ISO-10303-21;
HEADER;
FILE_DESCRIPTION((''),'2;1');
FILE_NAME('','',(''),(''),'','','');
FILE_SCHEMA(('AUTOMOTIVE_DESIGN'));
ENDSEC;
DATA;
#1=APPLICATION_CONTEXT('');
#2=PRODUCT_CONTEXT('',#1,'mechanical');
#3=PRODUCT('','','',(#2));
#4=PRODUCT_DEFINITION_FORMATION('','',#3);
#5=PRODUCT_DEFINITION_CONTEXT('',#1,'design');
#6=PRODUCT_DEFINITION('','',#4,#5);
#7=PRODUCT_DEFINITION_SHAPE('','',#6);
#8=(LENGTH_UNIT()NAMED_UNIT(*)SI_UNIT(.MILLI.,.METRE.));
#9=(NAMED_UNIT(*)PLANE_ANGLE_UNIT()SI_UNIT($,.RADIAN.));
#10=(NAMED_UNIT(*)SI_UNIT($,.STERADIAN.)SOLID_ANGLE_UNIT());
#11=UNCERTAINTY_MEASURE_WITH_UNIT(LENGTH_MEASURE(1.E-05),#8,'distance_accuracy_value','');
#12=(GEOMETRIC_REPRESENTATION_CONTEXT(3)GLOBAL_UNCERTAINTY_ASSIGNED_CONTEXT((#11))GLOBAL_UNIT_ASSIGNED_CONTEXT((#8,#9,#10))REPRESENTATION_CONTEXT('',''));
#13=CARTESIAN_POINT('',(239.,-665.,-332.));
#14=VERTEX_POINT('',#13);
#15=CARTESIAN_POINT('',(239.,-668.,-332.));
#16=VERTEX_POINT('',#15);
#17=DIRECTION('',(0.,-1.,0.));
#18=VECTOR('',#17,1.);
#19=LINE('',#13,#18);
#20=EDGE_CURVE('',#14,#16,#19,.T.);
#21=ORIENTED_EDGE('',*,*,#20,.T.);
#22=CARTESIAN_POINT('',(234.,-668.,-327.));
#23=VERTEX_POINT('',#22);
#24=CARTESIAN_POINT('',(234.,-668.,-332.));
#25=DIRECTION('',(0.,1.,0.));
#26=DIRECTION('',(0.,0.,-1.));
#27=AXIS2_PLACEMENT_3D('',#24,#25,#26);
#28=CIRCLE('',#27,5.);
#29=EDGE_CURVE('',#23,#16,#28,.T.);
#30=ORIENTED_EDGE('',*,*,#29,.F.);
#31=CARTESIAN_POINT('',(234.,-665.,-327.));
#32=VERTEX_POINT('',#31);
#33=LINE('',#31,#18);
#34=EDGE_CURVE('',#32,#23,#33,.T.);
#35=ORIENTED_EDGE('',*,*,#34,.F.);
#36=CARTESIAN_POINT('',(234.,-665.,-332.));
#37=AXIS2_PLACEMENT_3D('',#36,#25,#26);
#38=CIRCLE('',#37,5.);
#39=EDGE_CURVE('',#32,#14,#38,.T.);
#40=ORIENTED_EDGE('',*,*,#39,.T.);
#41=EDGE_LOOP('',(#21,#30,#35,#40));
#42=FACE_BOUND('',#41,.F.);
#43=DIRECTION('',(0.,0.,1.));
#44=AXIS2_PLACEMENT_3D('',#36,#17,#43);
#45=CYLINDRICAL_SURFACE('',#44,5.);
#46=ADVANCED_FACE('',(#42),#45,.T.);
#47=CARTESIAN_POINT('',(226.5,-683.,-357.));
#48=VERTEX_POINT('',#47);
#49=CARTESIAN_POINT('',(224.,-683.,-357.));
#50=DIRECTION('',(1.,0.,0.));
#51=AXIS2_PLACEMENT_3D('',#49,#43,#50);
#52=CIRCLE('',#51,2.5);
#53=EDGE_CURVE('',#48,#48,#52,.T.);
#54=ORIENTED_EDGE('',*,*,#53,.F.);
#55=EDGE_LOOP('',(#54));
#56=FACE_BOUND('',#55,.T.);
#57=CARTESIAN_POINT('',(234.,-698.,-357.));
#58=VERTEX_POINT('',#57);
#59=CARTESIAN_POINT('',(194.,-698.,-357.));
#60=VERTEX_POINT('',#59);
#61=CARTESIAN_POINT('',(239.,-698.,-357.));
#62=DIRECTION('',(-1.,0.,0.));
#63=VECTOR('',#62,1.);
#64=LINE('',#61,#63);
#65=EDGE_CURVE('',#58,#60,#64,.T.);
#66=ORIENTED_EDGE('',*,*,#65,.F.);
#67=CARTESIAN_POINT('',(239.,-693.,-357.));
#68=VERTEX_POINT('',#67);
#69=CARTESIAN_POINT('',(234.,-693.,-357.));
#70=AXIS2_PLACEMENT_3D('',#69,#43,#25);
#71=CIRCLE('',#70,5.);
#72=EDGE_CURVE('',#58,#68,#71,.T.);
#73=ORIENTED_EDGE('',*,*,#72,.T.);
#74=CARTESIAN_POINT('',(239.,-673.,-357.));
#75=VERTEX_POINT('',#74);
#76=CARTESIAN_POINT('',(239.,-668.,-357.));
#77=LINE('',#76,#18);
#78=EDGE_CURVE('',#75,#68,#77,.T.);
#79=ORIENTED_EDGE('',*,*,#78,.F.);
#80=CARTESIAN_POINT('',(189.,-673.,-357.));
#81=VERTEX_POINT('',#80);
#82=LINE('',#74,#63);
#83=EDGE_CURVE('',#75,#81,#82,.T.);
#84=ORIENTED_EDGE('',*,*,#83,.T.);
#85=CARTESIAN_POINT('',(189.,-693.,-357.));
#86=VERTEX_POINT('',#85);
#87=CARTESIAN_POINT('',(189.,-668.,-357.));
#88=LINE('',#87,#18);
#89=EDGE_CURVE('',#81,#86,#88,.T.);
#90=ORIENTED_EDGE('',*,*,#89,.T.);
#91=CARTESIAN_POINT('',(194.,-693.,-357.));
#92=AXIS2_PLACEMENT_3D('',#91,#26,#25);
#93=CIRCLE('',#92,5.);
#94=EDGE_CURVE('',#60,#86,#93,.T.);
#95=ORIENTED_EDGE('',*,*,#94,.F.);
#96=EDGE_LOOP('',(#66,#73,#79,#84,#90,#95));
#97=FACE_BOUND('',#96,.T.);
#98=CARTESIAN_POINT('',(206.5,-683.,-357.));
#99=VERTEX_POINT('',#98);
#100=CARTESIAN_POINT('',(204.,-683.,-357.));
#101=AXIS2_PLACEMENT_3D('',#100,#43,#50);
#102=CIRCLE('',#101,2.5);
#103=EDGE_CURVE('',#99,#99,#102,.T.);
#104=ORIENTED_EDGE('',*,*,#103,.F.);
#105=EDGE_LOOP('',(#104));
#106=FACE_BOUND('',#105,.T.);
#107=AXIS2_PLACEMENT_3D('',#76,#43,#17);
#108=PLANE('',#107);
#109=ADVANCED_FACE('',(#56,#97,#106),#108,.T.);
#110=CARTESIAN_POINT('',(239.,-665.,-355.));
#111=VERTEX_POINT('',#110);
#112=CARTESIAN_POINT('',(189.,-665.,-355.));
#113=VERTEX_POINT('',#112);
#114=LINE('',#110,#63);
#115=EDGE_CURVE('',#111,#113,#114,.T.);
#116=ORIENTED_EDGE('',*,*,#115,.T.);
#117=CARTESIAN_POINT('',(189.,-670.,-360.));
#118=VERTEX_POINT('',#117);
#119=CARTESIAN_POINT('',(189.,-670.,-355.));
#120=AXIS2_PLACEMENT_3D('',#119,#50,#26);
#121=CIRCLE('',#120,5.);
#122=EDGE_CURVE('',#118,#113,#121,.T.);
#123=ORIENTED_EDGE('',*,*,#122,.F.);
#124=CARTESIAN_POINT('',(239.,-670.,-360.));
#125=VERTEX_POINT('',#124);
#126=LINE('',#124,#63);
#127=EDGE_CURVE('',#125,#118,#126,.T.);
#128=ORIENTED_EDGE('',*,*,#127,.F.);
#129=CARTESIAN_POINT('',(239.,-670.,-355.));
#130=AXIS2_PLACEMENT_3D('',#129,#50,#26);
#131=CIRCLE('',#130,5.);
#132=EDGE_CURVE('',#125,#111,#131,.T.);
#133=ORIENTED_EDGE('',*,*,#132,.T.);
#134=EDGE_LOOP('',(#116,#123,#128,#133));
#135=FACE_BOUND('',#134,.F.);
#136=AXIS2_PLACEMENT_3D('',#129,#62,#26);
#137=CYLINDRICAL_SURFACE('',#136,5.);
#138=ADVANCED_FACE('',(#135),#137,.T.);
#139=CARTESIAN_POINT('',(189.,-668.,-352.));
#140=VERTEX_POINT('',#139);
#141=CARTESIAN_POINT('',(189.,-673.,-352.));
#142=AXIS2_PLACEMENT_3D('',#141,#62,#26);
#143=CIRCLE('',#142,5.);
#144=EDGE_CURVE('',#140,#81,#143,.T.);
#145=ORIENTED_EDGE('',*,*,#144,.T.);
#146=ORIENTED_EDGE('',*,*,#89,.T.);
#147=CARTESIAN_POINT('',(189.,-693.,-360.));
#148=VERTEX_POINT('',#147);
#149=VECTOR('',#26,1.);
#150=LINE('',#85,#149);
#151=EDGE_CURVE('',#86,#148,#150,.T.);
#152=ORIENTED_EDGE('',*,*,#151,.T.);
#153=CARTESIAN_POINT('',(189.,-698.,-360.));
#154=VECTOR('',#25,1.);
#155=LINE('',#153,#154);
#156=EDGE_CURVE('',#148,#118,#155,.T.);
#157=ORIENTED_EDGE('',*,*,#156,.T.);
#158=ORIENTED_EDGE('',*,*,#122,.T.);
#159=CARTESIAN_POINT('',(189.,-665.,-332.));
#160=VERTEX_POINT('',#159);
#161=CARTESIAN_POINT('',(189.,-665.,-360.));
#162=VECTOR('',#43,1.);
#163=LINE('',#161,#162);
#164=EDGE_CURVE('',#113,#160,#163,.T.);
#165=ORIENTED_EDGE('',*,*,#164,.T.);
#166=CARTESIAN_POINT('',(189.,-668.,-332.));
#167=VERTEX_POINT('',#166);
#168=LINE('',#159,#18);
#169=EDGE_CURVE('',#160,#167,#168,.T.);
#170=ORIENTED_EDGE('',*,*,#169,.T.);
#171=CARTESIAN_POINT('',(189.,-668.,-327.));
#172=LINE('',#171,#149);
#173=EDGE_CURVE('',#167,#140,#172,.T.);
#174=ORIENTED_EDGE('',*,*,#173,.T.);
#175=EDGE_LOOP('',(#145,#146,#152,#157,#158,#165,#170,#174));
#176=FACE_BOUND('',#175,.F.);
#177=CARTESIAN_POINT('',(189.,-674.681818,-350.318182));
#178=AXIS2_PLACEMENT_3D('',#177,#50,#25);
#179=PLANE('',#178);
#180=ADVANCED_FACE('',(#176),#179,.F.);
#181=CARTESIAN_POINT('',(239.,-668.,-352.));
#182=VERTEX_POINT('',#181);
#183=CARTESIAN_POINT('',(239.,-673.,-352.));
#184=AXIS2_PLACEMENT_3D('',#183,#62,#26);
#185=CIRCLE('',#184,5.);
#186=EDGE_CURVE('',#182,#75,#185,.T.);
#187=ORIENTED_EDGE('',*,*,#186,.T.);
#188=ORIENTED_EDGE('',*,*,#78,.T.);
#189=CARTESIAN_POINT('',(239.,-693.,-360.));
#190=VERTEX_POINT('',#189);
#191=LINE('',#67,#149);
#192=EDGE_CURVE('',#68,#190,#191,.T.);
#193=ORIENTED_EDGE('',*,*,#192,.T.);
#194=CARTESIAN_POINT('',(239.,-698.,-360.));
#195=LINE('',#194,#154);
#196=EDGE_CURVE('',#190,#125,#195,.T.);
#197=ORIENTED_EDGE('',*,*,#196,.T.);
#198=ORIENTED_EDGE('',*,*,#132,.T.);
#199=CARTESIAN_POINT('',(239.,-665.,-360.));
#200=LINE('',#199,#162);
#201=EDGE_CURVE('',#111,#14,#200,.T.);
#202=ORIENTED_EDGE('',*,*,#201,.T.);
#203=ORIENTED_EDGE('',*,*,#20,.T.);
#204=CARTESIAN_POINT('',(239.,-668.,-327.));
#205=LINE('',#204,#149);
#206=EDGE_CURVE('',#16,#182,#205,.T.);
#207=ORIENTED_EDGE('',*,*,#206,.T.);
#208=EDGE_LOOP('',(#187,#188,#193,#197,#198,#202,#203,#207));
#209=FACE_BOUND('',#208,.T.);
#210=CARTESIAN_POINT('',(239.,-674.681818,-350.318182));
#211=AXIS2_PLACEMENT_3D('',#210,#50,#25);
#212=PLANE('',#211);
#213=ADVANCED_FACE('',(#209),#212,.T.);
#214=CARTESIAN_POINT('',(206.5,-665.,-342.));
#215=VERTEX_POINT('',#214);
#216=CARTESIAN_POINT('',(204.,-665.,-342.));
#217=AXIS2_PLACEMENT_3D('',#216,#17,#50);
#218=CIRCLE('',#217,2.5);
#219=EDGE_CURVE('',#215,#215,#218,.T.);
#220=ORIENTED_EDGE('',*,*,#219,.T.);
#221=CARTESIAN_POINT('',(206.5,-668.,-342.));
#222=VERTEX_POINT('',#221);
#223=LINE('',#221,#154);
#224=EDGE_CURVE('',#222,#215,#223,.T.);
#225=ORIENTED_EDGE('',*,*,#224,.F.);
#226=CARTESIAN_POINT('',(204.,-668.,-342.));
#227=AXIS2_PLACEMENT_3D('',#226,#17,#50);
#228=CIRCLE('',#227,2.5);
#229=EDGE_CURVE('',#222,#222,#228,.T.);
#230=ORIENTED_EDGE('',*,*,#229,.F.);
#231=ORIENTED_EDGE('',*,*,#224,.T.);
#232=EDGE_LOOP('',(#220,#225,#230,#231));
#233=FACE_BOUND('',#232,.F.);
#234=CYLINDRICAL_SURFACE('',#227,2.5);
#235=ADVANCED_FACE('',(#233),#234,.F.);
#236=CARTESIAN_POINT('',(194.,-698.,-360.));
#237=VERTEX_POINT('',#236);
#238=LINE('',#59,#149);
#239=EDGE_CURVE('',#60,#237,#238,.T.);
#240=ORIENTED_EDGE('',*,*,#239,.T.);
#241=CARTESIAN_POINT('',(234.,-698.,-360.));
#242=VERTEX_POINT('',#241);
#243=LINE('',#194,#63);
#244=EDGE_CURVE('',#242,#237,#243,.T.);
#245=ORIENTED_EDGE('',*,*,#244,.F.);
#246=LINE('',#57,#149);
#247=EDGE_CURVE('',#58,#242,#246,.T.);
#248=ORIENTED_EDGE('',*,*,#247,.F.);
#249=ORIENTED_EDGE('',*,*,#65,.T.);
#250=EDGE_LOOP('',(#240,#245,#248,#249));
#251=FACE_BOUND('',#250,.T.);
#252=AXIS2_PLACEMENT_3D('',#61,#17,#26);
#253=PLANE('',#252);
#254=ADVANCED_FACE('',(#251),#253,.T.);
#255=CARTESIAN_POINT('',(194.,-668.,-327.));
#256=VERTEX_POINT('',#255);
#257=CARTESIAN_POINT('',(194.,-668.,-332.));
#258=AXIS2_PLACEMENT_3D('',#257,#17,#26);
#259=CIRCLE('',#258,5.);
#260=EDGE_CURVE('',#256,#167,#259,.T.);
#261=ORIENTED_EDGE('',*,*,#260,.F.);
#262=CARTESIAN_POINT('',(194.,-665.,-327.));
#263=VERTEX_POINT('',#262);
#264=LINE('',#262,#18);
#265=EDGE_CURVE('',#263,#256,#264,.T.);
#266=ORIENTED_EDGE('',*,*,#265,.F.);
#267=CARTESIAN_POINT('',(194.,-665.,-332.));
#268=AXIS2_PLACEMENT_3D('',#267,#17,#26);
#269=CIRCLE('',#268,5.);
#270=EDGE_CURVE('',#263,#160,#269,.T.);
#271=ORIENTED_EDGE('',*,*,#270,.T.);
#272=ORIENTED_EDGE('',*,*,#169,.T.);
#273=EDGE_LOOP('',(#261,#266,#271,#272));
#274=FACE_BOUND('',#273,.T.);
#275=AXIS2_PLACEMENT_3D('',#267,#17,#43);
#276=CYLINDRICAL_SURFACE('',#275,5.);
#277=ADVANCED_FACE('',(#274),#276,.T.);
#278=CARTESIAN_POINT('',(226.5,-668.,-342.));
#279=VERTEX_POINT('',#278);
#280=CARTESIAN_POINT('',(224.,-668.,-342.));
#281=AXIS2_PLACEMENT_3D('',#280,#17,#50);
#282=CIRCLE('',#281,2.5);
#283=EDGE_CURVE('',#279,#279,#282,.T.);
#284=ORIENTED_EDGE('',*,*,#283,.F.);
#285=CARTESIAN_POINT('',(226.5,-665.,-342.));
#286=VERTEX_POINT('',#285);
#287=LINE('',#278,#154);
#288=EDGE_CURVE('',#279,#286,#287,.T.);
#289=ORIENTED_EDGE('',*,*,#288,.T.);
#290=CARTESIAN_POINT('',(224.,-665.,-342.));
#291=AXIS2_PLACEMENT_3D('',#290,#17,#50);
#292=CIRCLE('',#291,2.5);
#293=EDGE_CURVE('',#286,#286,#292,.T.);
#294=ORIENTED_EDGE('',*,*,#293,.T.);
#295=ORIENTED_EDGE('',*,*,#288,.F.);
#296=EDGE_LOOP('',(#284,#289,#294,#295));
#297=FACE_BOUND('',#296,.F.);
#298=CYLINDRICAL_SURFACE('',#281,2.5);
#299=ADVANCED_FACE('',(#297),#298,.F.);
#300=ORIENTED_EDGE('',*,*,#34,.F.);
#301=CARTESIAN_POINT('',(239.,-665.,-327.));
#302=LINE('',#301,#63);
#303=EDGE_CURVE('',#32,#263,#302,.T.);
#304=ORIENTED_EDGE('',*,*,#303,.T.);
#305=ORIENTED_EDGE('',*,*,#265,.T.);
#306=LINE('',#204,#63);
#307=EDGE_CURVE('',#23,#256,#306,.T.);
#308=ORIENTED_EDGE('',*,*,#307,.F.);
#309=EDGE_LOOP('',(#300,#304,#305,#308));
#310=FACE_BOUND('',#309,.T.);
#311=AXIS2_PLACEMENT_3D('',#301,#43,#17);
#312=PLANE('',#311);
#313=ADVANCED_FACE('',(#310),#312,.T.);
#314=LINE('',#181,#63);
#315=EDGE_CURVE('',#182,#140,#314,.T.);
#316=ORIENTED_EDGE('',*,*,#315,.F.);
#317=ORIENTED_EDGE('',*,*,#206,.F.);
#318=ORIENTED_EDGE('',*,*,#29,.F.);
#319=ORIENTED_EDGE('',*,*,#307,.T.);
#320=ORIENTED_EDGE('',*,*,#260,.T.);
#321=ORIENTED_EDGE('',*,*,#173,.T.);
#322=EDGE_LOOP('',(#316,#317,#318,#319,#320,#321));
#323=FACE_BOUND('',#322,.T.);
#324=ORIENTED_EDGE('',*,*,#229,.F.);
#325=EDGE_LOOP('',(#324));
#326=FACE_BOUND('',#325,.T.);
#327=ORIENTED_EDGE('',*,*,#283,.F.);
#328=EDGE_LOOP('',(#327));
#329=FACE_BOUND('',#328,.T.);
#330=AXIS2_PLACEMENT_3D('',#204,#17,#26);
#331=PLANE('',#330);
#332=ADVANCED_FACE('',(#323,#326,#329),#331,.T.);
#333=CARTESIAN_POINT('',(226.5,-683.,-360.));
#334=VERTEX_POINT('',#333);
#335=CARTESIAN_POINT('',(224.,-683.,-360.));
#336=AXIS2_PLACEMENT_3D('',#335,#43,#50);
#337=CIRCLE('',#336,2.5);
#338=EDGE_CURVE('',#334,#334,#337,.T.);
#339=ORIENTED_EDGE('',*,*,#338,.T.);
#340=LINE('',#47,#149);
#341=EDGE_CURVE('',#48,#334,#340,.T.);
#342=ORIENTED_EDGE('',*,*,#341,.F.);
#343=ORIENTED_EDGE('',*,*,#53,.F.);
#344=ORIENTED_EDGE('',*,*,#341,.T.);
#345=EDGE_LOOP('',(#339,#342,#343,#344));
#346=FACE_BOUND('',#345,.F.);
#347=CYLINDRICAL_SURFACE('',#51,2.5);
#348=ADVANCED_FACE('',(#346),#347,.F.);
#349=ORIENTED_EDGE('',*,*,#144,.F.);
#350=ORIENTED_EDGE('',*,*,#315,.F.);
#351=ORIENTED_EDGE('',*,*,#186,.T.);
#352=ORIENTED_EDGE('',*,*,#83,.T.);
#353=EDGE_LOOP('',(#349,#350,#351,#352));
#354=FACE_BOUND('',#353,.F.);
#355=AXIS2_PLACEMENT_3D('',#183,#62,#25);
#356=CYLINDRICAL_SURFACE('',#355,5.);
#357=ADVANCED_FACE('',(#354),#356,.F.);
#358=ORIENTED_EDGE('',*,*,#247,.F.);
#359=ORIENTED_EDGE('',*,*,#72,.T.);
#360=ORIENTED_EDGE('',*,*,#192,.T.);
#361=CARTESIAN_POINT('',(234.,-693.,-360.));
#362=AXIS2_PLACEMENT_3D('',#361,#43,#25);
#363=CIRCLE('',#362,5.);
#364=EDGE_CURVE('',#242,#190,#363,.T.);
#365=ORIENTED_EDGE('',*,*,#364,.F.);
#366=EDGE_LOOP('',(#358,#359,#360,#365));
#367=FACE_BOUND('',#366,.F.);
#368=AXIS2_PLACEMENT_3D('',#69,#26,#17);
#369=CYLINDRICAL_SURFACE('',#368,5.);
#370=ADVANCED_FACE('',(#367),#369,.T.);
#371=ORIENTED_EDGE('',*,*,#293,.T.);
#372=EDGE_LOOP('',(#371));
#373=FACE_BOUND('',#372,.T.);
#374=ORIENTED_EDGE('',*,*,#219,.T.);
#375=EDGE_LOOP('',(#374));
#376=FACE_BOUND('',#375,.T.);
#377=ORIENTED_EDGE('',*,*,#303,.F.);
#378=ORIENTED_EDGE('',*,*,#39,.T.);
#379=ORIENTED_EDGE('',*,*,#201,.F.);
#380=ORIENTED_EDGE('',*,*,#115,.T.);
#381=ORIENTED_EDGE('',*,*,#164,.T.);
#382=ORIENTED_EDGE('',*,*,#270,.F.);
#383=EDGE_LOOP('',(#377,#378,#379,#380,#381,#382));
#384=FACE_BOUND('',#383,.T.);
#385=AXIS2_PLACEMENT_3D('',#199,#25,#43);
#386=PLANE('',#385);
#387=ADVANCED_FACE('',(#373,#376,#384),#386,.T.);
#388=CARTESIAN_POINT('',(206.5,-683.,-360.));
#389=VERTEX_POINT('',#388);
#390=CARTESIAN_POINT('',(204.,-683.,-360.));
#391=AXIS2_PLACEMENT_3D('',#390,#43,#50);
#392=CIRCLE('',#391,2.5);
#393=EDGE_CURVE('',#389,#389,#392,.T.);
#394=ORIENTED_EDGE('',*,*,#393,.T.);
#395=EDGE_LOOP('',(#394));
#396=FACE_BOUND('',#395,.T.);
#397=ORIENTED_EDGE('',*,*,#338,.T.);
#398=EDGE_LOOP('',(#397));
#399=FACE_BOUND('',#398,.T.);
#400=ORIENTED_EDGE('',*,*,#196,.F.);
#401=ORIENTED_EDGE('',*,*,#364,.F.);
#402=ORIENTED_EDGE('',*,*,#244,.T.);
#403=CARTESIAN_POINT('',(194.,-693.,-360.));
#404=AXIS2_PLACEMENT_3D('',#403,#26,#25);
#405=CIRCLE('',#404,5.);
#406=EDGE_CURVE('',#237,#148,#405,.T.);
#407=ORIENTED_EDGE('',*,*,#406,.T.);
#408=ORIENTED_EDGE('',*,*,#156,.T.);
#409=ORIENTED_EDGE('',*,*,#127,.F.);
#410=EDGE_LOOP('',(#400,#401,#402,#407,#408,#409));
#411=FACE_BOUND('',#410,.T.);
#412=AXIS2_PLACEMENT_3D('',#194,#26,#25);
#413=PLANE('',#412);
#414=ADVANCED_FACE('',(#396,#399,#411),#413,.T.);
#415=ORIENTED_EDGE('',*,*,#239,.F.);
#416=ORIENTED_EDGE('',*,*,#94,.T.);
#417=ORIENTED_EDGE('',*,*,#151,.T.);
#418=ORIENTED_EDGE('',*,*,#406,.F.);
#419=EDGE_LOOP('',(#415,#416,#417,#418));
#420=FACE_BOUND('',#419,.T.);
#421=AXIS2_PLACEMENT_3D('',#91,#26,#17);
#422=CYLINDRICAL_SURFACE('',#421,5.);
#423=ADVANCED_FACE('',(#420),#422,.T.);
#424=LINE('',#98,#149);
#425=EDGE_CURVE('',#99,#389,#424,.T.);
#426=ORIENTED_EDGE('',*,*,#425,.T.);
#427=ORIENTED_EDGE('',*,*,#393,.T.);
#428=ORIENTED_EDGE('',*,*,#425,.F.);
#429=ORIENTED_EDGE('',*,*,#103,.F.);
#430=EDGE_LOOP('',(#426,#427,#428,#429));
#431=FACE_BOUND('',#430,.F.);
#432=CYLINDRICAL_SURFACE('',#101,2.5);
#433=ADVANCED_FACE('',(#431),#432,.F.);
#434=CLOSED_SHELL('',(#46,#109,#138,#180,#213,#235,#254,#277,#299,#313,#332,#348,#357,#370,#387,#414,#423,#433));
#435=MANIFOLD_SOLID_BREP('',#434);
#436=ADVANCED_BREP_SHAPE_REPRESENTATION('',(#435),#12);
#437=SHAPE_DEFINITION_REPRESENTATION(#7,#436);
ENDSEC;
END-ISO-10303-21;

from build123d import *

# Parameters (mm, degrees)
F0_W      = 145
F0_H      = 5
F1_DEPTH  = 360
F0_W_2    = 58
F0_H_2    = 655
F2_DEPTH  = 360
F0_W_3    = 155
F0_H_3    = 163
F0_H_4    = 153
F3_DEPTH  = 360
F5_DEPTH  = 665
F7_DEPTH  = 394
F9_DEPTH  = 125
F11_DEPTH = 50
F12_R     = 5
F14_R     = 2.5
F15_DEPTH = 10
F13_R     = 2.5
F16_DEPTH = 10
F18_DEPTH = 502


# Not quite as in the source:
# - a feature names something its author has since deleted; it is built from what else it names


with BuildPart() as f1:
    # F0 (on Top) → F1 (new body)
    with BuildSketch(Plane.XY):
        Polygon((5, 0), (0, 0), (0, -665), (5, -665), (5, -660), (5, -5), align=None)
        Polygon((155, 0), (5, 0), (5, -5), (150, -5), (155, -5), align=None)
        Polygon((155, -665), (155, -5), (150, -5), (150, -660), (150, -665), align=None)
        with Locations((77.5, -662.5)):
            Rectangle(F0_W, F0_H)
    extrude(amount=-F1_DEPTH)


with BuildPart() as f2:
    # F0 (on Top) → F2 (new body)
    with BuildSketch(Plane.XY):
        Polygon((239, 0), (155, 0), (155, -5), (155, -665), (239, -665), (239, -163), align=None)
        with Locations((197, -332.5)):
            Rectangle(F0_W_2, F0_H_2, mode=Mode.SUBTRACT)
    extrude(amount=-F2_DEPTH)


with BuildPart() as f3:
    # F0 (on Top) → F3 (new body)
    with BuildSketch(Plane.XY):
        with Locations((316.5, -81.5)):
            Rectangle(F0_W_3, F0_H_3)
        with Locations((316.5, -81.5)):
            Rectangle(F0_W, F0_H_4, mode=Mode.SUBTRACT)
    extrude(amount=-F3_DEPTH)


with BuildPart() as f5:
    # F4 (on face) → F5 (new body)
    with BuildSketch(Plane(origin=(0, 0, 0), x_dir=(-1, 0, 0), z_dir=(0, 1, 0))):
        Polygon((0, -330), (0, -360), (30, -360), (30, -359), (1, -359), (1, -330), align=None)
    extrude(amount=-F5_DEPTH)


with BuildPart() as f7:
    # F6 (on face) → F7 (new body)
    with BuildSketch(Plane.YZ.offset(394)):
        Polygon((0, -330), (0, -360), (30, -360), (30, -359), (1, -359), (1, -330), align=None)
    extrude(amount=-F7_DEPTH)


with BuildPart() as f9:
    # F8 (on face) → F9 (new body)
    with BuildSketch(Plane.YZ.offset(394)):
        Polygon((-193, -360), (-163, -360), (-163, -330), (-164, -330), (-164, -359), (-193, -359), align=None)
    extrude(amount=-F9_DEPTH)


with BuildPart() as f11:
    # F10 (on face) → F11 (new body)
    with BuildSketch(Plane.YZ.offset(239)):
        Polygon((-698, -360), (-665, -360), (-665, -327), (-668, -327), (-668, -357), (-698, -357), align=None)
    extrude(amount=-F11_DEPTH)

    # F12
    f12_edges = [f11.edges().sort_by_distance(p)[0] for p in [
        (214, -668, -357),
        (189, -666.5, -327),
        (239, -666.5, -327),
        (239, -698, -358.5),
        (189, -698, -358.5),
        (214, -665, -360),
    ]]
    fillet(f12_edges, radius=F12_R)


with BuildPart() as f15_tool:
    # F14 (on face) → F15 (new body)
    with BuildSketch(Plane.XZ.offset(668)):
        with Locations((204, -342)):
            Circle(F14_R)
        with Locations((224, -342)):
            Circle(F14_R)
    extrude(amount=-F15_DEPTH)


with BuildPart() as f2_1:
    add(f2.part)

    # F15: cut by f15_tool
    add(f15_tool.part, mode=Mode.SUBTRACT)


with BuildPart() as f11_1:
    add(f11.part)

    # F15: cut by f15_tool
    add(f15_tool.part, mode=Mode.SUBTRACT)

    # F13 (on face) → F16 (cut)
    with BuildSketch(Plane.XY.offset(-357)):
        with Locations((204, -683)):
            Circle(F13_R)
        with Locations((224, -683)):
            Circle(F13_R)
    extrude(amount=-F16_DEPTH, mode=Mode.SUBTRACT)


with BuildPart() as f18:
    # F17 (on face) → F18 (new body)
    with BuildSketch(Plane.XZ.offset(665)):
        Polygon((242, -330), (239, -330), (239, -360), (269, -360), (269, -357), (242, -357), align=None)
    extrude(amount=-F18_DEPTH)


solid = f11_1.part
